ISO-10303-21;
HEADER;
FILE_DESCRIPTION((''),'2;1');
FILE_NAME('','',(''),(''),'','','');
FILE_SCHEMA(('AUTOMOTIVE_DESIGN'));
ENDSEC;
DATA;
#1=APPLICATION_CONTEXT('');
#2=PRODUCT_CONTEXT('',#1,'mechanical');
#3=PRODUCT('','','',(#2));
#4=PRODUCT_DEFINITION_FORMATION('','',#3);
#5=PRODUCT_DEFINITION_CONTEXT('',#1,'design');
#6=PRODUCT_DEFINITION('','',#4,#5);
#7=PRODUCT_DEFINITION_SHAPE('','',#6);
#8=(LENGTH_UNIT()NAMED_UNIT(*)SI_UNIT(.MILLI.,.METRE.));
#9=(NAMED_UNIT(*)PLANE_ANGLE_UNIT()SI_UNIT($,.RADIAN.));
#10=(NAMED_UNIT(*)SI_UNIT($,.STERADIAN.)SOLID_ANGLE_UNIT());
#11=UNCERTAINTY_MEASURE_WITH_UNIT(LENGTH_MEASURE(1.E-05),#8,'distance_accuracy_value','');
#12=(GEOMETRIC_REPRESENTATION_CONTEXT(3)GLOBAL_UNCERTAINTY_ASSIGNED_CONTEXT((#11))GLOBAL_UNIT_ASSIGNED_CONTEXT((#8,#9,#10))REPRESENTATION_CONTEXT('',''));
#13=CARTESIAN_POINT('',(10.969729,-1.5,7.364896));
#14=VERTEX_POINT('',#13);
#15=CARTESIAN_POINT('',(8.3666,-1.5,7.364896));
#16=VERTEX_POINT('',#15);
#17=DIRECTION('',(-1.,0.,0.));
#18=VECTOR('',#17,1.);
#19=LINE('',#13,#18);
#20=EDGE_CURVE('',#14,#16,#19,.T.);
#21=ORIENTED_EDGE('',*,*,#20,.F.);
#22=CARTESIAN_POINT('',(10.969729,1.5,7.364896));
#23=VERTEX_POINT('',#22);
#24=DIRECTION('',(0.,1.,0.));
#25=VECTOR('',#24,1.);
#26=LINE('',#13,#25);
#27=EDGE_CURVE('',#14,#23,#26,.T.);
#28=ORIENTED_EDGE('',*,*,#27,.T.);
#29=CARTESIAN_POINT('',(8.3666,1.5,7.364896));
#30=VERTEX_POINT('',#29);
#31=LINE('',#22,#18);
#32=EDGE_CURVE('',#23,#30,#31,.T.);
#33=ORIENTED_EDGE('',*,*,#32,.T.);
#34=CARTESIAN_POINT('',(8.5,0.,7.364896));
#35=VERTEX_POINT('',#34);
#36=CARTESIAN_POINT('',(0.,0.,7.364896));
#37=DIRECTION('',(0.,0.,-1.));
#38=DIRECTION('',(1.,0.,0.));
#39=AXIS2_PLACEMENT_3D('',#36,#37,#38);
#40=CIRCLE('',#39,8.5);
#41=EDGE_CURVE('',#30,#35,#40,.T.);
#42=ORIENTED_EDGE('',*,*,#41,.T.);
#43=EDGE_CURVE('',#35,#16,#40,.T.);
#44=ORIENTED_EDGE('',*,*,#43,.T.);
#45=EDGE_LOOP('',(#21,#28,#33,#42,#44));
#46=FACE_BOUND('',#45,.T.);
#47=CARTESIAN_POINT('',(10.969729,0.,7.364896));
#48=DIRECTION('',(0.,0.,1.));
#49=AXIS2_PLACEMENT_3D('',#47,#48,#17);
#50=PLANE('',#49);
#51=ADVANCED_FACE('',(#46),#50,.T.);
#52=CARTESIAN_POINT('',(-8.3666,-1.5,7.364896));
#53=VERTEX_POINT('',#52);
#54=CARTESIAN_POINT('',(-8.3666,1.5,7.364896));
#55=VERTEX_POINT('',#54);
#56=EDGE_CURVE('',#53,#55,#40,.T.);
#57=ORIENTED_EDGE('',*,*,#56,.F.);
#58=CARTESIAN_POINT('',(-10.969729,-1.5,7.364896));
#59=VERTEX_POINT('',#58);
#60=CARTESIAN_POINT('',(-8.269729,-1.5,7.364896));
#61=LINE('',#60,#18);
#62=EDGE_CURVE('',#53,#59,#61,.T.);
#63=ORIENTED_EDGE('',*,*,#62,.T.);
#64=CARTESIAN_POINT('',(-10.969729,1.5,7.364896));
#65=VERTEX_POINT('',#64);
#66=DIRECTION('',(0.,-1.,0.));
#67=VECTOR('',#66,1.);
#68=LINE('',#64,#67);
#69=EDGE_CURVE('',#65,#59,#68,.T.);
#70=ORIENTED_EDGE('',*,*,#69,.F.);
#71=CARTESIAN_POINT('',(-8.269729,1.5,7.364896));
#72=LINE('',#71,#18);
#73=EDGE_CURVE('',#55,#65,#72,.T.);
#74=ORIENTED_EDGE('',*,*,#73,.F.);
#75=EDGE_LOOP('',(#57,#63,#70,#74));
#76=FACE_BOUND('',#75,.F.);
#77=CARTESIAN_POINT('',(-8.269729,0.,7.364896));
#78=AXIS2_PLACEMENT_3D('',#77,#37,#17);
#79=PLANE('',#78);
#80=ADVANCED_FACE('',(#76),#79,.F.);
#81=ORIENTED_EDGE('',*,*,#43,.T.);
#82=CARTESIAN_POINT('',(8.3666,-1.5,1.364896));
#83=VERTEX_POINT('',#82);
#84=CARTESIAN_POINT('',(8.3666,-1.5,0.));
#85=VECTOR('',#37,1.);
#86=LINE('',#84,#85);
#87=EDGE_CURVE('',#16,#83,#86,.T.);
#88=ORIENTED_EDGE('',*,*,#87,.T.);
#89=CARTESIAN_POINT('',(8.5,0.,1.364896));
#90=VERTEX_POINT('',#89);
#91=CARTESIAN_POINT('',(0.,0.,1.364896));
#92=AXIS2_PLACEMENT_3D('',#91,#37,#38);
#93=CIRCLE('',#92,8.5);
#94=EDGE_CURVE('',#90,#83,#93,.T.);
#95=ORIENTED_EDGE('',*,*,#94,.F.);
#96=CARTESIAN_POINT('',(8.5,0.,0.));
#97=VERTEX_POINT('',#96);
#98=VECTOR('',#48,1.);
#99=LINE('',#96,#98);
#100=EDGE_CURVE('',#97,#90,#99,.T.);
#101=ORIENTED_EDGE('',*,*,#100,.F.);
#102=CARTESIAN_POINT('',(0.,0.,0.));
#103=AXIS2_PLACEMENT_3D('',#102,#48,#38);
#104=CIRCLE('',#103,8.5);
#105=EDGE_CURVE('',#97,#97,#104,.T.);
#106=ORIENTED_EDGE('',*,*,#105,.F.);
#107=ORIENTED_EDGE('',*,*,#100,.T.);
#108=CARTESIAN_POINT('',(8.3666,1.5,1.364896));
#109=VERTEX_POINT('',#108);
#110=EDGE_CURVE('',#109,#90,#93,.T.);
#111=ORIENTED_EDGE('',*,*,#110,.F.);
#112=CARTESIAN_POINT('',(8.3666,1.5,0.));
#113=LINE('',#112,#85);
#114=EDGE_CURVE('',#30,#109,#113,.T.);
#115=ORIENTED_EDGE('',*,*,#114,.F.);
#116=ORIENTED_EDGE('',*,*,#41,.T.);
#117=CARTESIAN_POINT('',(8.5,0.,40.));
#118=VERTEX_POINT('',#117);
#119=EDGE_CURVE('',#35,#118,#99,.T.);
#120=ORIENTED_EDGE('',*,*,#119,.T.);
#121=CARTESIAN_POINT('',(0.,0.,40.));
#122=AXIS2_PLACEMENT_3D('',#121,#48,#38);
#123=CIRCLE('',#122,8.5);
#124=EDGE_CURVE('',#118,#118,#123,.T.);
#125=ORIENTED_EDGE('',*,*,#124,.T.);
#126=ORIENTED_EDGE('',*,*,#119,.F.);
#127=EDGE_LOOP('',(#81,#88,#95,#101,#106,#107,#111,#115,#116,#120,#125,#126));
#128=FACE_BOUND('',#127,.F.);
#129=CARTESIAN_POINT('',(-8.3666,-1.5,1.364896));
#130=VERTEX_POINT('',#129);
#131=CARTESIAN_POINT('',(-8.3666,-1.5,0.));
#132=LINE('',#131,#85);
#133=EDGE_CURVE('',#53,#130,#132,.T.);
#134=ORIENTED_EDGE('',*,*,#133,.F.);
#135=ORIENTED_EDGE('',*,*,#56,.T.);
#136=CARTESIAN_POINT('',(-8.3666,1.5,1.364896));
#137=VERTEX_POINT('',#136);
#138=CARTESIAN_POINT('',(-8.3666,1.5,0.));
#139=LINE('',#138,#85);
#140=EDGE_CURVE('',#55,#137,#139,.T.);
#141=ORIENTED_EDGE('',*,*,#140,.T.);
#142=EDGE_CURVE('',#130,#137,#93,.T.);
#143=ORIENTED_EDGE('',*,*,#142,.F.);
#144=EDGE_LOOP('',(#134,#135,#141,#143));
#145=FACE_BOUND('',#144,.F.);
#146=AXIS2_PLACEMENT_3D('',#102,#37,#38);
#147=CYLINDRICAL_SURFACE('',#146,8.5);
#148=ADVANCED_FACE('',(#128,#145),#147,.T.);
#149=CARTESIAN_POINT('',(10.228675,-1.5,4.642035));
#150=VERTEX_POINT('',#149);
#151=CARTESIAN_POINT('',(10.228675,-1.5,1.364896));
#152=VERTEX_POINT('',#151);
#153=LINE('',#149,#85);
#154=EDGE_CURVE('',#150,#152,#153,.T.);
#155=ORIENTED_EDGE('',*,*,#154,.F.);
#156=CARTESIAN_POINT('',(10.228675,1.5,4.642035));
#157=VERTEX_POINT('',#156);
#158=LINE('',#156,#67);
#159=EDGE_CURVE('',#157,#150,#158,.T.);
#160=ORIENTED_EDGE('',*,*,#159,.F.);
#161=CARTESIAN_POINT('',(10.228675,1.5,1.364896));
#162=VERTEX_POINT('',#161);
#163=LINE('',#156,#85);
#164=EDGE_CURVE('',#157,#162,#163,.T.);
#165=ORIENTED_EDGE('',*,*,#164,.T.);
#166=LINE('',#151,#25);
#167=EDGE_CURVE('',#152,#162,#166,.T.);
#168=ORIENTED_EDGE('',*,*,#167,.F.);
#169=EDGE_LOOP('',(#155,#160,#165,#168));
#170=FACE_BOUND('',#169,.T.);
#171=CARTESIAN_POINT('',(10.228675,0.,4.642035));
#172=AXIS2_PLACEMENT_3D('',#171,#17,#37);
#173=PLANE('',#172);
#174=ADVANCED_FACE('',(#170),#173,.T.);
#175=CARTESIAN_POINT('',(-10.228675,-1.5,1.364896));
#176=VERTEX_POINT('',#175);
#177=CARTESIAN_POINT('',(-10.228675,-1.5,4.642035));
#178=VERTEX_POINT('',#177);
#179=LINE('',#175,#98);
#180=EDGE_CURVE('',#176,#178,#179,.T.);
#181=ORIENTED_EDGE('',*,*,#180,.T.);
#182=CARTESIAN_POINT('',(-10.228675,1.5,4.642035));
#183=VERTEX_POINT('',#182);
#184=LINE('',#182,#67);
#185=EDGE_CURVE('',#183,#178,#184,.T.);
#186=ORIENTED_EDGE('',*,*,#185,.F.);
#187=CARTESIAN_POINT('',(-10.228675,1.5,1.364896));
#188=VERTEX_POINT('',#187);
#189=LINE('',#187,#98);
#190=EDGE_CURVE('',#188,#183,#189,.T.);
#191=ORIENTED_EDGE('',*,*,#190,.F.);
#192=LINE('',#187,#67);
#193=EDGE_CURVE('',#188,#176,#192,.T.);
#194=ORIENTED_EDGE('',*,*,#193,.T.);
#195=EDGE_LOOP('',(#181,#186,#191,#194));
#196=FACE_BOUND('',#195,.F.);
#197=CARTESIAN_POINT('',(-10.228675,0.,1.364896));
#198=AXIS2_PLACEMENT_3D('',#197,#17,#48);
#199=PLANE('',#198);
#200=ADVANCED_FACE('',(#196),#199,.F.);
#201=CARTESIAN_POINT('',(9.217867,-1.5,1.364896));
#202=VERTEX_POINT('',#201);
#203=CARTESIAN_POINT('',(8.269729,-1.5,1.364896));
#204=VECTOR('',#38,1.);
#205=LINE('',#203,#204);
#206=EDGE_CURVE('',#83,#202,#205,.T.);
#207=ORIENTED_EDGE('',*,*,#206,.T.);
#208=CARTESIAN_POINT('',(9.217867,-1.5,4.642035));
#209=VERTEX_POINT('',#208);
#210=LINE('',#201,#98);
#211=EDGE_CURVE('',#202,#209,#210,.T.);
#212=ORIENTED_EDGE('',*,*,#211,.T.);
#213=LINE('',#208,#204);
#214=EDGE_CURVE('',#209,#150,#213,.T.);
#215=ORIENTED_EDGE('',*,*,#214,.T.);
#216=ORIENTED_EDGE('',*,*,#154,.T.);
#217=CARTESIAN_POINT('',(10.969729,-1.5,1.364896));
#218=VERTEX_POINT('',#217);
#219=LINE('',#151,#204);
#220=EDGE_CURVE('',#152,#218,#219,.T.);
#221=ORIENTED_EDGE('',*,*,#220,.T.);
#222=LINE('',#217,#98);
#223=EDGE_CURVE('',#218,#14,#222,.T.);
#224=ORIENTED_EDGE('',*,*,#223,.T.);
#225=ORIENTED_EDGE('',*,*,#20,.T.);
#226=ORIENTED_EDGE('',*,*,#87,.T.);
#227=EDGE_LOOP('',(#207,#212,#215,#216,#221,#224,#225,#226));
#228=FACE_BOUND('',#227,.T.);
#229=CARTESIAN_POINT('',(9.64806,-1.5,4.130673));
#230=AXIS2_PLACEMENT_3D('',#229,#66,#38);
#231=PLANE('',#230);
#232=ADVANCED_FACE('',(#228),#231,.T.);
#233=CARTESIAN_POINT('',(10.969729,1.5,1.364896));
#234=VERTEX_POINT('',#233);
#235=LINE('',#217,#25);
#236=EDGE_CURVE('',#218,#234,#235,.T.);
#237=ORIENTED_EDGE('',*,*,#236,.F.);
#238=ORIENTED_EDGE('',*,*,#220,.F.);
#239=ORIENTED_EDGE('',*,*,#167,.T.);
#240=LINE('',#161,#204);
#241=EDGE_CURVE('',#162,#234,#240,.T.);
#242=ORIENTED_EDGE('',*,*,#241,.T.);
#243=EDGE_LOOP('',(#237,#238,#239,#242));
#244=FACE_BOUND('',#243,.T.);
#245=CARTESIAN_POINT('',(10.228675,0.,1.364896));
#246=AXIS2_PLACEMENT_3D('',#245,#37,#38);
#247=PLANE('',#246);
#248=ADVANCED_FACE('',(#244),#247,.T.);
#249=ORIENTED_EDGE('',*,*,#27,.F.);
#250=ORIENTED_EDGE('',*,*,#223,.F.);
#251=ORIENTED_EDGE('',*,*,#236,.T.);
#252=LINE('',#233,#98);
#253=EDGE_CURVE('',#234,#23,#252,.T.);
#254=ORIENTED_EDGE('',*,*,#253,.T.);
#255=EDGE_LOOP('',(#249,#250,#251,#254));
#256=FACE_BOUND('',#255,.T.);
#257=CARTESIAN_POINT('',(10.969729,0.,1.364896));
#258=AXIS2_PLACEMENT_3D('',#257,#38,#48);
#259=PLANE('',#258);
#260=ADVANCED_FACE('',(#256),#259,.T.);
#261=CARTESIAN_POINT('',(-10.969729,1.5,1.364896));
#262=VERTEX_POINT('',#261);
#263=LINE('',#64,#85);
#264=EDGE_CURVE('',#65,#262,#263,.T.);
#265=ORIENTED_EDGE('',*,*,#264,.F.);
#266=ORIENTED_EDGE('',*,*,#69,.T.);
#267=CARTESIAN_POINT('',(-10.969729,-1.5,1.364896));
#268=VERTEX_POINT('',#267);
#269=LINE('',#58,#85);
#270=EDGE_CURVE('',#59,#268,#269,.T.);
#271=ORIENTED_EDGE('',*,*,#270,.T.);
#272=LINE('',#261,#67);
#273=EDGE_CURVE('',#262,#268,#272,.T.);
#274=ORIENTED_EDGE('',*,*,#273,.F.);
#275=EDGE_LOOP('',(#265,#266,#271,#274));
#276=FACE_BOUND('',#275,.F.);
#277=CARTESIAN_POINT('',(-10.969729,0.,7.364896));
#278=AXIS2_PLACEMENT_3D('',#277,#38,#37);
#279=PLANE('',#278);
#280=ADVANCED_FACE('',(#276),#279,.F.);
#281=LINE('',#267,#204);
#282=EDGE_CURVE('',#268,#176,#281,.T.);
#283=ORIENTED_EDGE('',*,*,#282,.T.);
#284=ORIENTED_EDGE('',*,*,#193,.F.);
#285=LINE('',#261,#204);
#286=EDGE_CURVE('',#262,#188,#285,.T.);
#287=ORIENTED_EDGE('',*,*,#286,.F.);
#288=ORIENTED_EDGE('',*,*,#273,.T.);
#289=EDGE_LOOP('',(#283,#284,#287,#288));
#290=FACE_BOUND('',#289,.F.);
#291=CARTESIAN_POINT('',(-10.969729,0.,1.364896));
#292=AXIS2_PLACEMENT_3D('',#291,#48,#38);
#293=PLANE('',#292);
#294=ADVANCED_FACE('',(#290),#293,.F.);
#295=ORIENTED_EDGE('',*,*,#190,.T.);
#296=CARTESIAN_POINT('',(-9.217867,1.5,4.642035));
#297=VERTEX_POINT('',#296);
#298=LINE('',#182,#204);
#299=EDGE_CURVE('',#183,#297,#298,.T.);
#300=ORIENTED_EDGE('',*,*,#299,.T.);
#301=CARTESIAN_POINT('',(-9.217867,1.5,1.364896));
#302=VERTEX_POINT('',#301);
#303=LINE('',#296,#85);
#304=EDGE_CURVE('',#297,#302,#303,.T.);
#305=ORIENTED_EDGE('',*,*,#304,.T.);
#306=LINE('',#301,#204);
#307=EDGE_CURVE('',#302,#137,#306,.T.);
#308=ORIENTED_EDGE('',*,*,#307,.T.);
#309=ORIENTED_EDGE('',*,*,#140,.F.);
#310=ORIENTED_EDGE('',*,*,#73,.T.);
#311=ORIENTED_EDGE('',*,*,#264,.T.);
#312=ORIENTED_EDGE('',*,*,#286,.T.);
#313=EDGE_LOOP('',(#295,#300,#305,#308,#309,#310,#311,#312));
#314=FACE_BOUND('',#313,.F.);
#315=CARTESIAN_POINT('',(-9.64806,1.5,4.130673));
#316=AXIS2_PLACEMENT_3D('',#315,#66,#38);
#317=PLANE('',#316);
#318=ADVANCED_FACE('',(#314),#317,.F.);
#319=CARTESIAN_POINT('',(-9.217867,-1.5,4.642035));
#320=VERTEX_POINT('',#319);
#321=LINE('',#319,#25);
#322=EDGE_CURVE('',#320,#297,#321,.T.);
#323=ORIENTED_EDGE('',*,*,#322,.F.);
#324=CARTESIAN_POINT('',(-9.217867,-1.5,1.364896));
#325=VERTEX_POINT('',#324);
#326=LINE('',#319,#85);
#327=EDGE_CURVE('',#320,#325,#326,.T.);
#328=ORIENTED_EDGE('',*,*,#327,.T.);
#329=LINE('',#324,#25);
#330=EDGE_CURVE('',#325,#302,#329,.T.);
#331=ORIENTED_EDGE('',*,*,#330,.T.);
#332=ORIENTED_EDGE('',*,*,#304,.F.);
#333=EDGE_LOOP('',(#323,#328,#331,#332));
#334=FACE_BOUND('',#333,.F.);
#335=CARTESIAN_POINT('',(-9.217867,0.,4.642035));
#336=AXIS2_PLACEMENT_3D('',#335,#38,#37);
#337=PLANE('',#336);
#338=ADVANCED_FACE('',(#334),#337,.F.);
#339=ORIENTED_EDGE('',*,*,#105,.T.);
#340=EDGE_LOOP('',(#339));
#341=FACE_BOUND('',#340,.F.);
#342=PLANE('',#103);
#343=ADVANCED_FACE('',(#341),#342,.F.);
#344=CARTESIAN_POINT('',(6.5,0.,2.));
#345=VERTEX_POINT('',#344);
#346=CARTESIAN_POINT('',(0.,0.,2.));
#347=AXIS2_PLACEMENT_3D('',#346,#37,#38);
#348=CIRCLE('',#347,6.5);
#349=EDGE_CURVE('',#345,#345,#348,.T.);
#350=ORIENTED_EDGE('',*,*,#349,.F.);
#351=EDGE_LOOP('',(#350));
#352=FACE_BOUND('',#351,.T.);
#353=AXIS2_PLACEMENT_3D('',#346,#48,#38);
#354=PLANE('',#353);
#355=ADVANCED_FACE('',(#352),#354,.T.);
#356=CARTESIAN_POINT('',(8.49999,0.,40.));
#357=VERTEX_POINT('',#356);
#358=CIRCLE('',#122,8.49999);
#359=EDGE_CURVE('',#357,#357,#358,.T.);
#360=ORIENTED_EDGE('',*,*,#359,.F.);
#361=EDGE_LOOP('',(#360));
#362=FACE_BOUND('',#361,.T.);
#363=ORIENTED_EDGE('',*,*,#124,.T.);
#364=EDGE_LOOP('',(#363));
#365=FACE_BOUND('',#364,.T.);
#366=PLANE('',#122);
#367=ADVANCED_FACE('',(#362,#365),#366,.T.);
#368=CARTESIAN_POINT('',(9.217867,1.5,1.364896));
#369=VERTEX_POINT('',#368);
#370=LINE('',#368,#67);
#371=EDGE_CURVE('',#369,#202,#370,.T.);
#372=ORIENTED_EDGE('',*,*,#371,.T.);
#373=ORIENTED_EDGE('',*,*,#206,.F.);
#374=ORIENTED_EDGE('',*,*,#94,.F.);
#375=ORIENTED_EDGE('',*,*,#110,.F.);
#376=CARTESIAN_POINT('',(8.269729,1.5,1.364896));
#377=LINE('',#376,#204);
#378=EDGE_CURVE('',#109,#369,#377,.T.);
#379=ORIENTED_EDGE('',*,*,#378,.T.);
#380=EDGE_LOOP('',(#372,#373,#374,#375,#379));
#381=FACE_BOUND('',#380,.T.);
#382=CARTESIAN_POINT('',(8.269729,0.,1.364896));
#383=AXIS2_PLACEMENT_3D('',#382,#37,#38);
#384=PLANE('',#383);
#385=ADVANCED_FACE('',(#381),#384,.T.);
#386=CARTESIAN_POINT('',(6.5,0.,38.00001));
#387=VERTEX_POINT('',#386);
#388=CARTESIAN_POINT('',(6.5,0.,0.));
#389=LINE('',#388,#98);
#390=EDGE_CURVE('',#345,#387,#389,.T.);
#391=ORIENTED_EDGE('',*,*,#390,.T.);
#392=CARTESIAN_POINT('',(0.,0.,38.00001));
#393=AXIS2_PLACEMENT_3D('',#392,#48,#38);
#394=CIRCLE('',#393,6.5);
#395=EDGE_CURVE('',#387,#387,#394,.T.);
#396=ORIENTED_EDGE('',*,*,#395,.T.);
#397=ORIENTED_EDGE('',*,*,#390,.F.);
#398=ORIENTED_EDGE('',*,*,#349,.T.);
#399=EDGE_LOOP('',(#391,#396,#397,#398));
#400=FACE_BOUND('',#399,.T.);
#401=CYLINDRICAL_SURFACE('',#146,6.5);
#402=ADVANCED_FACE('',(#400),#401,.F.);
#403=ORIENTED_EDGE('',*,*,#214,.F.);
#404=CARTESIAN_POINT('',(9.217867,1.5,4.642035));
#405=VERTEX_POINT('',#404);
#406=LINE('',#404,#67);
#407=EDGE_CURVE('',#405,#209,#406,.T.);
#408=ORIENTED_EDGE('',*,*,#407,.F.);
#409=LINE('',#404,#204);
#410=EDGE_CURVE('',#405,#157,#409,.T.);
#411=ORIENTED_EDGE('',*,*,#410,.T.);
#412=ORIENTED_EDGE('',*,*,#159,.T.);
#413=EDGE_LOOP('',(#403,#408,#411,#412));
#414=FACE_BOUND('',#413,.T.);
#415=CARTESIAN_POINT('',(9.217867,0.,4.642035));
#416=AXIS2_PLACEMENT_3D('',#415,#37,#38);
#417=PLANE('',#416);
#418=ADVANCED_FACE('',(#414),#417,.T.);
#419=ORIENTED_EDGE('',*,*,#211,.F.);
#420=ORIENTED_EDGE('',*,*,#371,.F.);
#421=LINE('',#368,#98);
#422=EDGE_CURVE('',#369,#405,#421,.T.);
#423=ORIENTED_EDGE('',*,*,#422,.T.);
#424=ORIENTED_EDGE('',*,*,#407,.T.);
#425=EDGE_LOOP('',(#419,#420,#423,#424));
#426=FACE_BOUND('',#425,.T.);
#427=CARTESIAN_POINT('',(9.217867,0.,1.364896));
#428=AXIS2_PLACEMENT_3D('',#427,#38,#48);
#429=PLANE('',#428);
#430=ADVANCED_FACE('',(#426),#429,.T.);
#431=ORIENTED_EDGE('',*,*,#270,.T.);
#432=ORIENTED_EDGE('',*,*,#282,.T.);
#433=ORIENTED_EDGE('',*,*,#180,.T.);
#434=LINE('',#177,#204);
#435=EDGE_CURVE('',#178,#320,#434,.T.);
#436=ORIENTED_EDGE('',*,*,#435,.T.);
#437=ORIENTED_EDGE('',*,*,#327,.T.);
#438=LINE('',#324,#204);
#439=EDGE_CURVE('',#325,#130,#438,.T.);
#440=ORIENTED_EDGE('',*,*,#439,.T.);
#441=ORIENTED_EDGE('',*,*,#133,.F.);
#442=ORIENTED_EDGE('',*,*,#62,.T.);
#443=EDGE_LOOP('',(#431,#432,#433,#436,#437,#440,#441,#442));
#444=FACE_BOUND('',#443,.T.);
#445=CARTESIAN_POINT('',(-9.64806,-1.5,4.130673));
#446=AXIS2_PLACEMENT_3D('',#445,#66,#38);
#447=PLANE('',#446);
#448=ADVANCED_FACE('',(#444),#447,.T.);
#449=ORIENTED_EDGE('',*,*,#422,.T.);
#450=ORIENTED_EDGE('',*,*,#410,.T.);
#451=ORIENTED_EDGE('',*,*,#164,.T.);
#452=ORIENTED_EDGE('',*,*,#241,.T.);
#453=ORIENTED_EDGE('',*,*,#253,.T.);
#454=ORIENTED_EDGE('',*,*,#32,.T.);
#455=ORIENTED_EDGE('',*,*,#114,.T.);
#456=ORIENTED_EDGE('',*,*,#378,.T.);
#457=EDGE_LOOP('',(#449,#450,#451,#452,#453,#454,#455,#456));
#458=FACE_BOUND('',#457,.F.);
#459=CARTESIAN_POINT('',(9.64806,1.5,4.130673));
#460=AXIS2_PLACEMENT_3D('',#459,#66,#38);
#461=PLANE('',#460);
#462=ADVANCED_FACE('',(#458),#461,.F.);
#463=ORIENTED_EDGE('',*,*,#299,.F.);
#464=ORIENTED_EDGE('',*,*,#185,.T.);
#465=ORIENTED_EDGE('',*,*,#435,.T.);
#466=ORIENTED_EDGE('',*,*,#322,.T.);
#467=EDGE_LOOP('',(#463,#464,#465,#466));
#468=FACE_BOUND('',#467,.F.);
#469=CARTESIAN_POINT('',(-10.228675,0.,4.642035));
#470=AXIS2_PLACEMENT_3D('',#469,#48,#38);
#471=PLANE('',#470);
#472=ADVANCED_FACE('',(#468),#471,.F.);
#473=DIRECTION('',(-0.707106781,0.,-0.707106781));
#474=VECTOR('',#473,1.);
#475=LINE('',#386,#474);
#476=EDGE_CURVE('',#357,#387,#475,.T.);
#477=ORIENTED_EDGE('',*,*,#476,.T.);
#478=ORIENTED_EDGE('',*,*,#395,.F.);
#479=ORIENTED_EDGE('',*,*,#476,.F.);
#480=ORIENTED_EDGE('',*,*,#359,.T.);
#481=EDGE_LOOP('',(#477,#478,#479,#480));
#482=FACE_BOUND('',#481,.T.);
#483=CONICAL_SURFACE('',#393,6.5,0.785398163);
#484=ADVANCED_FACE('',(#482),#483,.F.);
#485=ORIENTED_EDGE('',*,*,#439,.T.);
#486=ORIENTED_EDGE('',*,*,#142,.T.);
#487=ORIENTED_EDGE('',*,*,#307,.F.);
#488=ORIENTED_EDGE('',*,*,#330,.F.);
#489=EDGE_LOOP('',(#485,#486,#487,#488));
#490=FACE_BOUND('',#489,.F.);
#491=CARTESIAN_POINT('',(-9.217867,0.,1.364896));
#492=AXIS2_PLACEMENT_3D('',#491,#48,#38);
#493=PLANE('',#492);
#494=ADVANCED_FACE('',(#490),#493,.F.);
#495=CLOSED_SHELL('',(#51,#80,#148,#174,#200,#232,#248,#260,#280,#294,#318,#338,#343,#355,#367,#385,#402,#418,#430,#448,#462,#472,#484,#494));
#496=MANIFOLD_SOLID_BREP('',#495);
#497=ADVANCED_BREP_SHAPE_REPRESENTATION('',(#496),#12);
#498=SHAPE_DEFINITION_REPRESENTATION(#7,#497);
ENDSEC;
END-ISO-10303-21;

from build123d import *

# Parameters (mm, degrees)
F0_R     = 8.5
F1_DEPTH = 40
F2_T     = -2
F3_SIZE  = 1.99999
F5_DEPTH = 1.5


# Not quite as in the source:
# - a fillet or chamfer is up to 0.001 mm smaller than in the source, because OpenCascade refuses the exact size


with BuildPart() as f1:
    # F0 (on Top) → F1 (new body)
    with BuildSketch(Plane.XY):
        Circle(F0_R)
    extrude(amount=F1_DEPTH)

    # F2
    f2_openings = [f1.faces().sort_by_distance(p)[0] for p in [
        (0, 0, 40),
    ]]
    offset(amount=F2_T, openings=f2_openings)

    # F3 (size 2 in the source; OpenCascade refuses exactly that, so slightly less here)
    f3_edges = [f1.edges().sort_by_distance(p)[0] for p in [
        (-6.5, 0, 40),
    ]]
    chamfer(f3_edges, length=F3_SIZE)

    # F4 (on Front) → F5 (join, symmetric)
    with BuildSketch(Plane.XZ):
        Polygon((-8.2697293678, 1.3648961653), (-8.2697293678, 7.3648961653), (-10.9697293678, 7.3648961653), (-10.9697293678, 1.3648961653), (-10.2286748588, 1.3648961653), (-10.2286748588, 4.6420348808), (-9.2178666964, 4.6420348808), (-9.2178666964, 1.3648961653), align=None)
        Polygon((10.9697293678, 7.3648961653), (8.2697293678, 7.3648961653), (8.2697293678, 1.3648961653), (9.2178666964, 1.3648961653), (9.2178666964, 4.6420348808), (10.2286748588, 4.6420348808), (10.2286748588, 1.3648961653), (10.9697293678, 1.3648961653), align=None)
    extrude(amount=F5_DEPTH, both=True)


solid = f1.part
